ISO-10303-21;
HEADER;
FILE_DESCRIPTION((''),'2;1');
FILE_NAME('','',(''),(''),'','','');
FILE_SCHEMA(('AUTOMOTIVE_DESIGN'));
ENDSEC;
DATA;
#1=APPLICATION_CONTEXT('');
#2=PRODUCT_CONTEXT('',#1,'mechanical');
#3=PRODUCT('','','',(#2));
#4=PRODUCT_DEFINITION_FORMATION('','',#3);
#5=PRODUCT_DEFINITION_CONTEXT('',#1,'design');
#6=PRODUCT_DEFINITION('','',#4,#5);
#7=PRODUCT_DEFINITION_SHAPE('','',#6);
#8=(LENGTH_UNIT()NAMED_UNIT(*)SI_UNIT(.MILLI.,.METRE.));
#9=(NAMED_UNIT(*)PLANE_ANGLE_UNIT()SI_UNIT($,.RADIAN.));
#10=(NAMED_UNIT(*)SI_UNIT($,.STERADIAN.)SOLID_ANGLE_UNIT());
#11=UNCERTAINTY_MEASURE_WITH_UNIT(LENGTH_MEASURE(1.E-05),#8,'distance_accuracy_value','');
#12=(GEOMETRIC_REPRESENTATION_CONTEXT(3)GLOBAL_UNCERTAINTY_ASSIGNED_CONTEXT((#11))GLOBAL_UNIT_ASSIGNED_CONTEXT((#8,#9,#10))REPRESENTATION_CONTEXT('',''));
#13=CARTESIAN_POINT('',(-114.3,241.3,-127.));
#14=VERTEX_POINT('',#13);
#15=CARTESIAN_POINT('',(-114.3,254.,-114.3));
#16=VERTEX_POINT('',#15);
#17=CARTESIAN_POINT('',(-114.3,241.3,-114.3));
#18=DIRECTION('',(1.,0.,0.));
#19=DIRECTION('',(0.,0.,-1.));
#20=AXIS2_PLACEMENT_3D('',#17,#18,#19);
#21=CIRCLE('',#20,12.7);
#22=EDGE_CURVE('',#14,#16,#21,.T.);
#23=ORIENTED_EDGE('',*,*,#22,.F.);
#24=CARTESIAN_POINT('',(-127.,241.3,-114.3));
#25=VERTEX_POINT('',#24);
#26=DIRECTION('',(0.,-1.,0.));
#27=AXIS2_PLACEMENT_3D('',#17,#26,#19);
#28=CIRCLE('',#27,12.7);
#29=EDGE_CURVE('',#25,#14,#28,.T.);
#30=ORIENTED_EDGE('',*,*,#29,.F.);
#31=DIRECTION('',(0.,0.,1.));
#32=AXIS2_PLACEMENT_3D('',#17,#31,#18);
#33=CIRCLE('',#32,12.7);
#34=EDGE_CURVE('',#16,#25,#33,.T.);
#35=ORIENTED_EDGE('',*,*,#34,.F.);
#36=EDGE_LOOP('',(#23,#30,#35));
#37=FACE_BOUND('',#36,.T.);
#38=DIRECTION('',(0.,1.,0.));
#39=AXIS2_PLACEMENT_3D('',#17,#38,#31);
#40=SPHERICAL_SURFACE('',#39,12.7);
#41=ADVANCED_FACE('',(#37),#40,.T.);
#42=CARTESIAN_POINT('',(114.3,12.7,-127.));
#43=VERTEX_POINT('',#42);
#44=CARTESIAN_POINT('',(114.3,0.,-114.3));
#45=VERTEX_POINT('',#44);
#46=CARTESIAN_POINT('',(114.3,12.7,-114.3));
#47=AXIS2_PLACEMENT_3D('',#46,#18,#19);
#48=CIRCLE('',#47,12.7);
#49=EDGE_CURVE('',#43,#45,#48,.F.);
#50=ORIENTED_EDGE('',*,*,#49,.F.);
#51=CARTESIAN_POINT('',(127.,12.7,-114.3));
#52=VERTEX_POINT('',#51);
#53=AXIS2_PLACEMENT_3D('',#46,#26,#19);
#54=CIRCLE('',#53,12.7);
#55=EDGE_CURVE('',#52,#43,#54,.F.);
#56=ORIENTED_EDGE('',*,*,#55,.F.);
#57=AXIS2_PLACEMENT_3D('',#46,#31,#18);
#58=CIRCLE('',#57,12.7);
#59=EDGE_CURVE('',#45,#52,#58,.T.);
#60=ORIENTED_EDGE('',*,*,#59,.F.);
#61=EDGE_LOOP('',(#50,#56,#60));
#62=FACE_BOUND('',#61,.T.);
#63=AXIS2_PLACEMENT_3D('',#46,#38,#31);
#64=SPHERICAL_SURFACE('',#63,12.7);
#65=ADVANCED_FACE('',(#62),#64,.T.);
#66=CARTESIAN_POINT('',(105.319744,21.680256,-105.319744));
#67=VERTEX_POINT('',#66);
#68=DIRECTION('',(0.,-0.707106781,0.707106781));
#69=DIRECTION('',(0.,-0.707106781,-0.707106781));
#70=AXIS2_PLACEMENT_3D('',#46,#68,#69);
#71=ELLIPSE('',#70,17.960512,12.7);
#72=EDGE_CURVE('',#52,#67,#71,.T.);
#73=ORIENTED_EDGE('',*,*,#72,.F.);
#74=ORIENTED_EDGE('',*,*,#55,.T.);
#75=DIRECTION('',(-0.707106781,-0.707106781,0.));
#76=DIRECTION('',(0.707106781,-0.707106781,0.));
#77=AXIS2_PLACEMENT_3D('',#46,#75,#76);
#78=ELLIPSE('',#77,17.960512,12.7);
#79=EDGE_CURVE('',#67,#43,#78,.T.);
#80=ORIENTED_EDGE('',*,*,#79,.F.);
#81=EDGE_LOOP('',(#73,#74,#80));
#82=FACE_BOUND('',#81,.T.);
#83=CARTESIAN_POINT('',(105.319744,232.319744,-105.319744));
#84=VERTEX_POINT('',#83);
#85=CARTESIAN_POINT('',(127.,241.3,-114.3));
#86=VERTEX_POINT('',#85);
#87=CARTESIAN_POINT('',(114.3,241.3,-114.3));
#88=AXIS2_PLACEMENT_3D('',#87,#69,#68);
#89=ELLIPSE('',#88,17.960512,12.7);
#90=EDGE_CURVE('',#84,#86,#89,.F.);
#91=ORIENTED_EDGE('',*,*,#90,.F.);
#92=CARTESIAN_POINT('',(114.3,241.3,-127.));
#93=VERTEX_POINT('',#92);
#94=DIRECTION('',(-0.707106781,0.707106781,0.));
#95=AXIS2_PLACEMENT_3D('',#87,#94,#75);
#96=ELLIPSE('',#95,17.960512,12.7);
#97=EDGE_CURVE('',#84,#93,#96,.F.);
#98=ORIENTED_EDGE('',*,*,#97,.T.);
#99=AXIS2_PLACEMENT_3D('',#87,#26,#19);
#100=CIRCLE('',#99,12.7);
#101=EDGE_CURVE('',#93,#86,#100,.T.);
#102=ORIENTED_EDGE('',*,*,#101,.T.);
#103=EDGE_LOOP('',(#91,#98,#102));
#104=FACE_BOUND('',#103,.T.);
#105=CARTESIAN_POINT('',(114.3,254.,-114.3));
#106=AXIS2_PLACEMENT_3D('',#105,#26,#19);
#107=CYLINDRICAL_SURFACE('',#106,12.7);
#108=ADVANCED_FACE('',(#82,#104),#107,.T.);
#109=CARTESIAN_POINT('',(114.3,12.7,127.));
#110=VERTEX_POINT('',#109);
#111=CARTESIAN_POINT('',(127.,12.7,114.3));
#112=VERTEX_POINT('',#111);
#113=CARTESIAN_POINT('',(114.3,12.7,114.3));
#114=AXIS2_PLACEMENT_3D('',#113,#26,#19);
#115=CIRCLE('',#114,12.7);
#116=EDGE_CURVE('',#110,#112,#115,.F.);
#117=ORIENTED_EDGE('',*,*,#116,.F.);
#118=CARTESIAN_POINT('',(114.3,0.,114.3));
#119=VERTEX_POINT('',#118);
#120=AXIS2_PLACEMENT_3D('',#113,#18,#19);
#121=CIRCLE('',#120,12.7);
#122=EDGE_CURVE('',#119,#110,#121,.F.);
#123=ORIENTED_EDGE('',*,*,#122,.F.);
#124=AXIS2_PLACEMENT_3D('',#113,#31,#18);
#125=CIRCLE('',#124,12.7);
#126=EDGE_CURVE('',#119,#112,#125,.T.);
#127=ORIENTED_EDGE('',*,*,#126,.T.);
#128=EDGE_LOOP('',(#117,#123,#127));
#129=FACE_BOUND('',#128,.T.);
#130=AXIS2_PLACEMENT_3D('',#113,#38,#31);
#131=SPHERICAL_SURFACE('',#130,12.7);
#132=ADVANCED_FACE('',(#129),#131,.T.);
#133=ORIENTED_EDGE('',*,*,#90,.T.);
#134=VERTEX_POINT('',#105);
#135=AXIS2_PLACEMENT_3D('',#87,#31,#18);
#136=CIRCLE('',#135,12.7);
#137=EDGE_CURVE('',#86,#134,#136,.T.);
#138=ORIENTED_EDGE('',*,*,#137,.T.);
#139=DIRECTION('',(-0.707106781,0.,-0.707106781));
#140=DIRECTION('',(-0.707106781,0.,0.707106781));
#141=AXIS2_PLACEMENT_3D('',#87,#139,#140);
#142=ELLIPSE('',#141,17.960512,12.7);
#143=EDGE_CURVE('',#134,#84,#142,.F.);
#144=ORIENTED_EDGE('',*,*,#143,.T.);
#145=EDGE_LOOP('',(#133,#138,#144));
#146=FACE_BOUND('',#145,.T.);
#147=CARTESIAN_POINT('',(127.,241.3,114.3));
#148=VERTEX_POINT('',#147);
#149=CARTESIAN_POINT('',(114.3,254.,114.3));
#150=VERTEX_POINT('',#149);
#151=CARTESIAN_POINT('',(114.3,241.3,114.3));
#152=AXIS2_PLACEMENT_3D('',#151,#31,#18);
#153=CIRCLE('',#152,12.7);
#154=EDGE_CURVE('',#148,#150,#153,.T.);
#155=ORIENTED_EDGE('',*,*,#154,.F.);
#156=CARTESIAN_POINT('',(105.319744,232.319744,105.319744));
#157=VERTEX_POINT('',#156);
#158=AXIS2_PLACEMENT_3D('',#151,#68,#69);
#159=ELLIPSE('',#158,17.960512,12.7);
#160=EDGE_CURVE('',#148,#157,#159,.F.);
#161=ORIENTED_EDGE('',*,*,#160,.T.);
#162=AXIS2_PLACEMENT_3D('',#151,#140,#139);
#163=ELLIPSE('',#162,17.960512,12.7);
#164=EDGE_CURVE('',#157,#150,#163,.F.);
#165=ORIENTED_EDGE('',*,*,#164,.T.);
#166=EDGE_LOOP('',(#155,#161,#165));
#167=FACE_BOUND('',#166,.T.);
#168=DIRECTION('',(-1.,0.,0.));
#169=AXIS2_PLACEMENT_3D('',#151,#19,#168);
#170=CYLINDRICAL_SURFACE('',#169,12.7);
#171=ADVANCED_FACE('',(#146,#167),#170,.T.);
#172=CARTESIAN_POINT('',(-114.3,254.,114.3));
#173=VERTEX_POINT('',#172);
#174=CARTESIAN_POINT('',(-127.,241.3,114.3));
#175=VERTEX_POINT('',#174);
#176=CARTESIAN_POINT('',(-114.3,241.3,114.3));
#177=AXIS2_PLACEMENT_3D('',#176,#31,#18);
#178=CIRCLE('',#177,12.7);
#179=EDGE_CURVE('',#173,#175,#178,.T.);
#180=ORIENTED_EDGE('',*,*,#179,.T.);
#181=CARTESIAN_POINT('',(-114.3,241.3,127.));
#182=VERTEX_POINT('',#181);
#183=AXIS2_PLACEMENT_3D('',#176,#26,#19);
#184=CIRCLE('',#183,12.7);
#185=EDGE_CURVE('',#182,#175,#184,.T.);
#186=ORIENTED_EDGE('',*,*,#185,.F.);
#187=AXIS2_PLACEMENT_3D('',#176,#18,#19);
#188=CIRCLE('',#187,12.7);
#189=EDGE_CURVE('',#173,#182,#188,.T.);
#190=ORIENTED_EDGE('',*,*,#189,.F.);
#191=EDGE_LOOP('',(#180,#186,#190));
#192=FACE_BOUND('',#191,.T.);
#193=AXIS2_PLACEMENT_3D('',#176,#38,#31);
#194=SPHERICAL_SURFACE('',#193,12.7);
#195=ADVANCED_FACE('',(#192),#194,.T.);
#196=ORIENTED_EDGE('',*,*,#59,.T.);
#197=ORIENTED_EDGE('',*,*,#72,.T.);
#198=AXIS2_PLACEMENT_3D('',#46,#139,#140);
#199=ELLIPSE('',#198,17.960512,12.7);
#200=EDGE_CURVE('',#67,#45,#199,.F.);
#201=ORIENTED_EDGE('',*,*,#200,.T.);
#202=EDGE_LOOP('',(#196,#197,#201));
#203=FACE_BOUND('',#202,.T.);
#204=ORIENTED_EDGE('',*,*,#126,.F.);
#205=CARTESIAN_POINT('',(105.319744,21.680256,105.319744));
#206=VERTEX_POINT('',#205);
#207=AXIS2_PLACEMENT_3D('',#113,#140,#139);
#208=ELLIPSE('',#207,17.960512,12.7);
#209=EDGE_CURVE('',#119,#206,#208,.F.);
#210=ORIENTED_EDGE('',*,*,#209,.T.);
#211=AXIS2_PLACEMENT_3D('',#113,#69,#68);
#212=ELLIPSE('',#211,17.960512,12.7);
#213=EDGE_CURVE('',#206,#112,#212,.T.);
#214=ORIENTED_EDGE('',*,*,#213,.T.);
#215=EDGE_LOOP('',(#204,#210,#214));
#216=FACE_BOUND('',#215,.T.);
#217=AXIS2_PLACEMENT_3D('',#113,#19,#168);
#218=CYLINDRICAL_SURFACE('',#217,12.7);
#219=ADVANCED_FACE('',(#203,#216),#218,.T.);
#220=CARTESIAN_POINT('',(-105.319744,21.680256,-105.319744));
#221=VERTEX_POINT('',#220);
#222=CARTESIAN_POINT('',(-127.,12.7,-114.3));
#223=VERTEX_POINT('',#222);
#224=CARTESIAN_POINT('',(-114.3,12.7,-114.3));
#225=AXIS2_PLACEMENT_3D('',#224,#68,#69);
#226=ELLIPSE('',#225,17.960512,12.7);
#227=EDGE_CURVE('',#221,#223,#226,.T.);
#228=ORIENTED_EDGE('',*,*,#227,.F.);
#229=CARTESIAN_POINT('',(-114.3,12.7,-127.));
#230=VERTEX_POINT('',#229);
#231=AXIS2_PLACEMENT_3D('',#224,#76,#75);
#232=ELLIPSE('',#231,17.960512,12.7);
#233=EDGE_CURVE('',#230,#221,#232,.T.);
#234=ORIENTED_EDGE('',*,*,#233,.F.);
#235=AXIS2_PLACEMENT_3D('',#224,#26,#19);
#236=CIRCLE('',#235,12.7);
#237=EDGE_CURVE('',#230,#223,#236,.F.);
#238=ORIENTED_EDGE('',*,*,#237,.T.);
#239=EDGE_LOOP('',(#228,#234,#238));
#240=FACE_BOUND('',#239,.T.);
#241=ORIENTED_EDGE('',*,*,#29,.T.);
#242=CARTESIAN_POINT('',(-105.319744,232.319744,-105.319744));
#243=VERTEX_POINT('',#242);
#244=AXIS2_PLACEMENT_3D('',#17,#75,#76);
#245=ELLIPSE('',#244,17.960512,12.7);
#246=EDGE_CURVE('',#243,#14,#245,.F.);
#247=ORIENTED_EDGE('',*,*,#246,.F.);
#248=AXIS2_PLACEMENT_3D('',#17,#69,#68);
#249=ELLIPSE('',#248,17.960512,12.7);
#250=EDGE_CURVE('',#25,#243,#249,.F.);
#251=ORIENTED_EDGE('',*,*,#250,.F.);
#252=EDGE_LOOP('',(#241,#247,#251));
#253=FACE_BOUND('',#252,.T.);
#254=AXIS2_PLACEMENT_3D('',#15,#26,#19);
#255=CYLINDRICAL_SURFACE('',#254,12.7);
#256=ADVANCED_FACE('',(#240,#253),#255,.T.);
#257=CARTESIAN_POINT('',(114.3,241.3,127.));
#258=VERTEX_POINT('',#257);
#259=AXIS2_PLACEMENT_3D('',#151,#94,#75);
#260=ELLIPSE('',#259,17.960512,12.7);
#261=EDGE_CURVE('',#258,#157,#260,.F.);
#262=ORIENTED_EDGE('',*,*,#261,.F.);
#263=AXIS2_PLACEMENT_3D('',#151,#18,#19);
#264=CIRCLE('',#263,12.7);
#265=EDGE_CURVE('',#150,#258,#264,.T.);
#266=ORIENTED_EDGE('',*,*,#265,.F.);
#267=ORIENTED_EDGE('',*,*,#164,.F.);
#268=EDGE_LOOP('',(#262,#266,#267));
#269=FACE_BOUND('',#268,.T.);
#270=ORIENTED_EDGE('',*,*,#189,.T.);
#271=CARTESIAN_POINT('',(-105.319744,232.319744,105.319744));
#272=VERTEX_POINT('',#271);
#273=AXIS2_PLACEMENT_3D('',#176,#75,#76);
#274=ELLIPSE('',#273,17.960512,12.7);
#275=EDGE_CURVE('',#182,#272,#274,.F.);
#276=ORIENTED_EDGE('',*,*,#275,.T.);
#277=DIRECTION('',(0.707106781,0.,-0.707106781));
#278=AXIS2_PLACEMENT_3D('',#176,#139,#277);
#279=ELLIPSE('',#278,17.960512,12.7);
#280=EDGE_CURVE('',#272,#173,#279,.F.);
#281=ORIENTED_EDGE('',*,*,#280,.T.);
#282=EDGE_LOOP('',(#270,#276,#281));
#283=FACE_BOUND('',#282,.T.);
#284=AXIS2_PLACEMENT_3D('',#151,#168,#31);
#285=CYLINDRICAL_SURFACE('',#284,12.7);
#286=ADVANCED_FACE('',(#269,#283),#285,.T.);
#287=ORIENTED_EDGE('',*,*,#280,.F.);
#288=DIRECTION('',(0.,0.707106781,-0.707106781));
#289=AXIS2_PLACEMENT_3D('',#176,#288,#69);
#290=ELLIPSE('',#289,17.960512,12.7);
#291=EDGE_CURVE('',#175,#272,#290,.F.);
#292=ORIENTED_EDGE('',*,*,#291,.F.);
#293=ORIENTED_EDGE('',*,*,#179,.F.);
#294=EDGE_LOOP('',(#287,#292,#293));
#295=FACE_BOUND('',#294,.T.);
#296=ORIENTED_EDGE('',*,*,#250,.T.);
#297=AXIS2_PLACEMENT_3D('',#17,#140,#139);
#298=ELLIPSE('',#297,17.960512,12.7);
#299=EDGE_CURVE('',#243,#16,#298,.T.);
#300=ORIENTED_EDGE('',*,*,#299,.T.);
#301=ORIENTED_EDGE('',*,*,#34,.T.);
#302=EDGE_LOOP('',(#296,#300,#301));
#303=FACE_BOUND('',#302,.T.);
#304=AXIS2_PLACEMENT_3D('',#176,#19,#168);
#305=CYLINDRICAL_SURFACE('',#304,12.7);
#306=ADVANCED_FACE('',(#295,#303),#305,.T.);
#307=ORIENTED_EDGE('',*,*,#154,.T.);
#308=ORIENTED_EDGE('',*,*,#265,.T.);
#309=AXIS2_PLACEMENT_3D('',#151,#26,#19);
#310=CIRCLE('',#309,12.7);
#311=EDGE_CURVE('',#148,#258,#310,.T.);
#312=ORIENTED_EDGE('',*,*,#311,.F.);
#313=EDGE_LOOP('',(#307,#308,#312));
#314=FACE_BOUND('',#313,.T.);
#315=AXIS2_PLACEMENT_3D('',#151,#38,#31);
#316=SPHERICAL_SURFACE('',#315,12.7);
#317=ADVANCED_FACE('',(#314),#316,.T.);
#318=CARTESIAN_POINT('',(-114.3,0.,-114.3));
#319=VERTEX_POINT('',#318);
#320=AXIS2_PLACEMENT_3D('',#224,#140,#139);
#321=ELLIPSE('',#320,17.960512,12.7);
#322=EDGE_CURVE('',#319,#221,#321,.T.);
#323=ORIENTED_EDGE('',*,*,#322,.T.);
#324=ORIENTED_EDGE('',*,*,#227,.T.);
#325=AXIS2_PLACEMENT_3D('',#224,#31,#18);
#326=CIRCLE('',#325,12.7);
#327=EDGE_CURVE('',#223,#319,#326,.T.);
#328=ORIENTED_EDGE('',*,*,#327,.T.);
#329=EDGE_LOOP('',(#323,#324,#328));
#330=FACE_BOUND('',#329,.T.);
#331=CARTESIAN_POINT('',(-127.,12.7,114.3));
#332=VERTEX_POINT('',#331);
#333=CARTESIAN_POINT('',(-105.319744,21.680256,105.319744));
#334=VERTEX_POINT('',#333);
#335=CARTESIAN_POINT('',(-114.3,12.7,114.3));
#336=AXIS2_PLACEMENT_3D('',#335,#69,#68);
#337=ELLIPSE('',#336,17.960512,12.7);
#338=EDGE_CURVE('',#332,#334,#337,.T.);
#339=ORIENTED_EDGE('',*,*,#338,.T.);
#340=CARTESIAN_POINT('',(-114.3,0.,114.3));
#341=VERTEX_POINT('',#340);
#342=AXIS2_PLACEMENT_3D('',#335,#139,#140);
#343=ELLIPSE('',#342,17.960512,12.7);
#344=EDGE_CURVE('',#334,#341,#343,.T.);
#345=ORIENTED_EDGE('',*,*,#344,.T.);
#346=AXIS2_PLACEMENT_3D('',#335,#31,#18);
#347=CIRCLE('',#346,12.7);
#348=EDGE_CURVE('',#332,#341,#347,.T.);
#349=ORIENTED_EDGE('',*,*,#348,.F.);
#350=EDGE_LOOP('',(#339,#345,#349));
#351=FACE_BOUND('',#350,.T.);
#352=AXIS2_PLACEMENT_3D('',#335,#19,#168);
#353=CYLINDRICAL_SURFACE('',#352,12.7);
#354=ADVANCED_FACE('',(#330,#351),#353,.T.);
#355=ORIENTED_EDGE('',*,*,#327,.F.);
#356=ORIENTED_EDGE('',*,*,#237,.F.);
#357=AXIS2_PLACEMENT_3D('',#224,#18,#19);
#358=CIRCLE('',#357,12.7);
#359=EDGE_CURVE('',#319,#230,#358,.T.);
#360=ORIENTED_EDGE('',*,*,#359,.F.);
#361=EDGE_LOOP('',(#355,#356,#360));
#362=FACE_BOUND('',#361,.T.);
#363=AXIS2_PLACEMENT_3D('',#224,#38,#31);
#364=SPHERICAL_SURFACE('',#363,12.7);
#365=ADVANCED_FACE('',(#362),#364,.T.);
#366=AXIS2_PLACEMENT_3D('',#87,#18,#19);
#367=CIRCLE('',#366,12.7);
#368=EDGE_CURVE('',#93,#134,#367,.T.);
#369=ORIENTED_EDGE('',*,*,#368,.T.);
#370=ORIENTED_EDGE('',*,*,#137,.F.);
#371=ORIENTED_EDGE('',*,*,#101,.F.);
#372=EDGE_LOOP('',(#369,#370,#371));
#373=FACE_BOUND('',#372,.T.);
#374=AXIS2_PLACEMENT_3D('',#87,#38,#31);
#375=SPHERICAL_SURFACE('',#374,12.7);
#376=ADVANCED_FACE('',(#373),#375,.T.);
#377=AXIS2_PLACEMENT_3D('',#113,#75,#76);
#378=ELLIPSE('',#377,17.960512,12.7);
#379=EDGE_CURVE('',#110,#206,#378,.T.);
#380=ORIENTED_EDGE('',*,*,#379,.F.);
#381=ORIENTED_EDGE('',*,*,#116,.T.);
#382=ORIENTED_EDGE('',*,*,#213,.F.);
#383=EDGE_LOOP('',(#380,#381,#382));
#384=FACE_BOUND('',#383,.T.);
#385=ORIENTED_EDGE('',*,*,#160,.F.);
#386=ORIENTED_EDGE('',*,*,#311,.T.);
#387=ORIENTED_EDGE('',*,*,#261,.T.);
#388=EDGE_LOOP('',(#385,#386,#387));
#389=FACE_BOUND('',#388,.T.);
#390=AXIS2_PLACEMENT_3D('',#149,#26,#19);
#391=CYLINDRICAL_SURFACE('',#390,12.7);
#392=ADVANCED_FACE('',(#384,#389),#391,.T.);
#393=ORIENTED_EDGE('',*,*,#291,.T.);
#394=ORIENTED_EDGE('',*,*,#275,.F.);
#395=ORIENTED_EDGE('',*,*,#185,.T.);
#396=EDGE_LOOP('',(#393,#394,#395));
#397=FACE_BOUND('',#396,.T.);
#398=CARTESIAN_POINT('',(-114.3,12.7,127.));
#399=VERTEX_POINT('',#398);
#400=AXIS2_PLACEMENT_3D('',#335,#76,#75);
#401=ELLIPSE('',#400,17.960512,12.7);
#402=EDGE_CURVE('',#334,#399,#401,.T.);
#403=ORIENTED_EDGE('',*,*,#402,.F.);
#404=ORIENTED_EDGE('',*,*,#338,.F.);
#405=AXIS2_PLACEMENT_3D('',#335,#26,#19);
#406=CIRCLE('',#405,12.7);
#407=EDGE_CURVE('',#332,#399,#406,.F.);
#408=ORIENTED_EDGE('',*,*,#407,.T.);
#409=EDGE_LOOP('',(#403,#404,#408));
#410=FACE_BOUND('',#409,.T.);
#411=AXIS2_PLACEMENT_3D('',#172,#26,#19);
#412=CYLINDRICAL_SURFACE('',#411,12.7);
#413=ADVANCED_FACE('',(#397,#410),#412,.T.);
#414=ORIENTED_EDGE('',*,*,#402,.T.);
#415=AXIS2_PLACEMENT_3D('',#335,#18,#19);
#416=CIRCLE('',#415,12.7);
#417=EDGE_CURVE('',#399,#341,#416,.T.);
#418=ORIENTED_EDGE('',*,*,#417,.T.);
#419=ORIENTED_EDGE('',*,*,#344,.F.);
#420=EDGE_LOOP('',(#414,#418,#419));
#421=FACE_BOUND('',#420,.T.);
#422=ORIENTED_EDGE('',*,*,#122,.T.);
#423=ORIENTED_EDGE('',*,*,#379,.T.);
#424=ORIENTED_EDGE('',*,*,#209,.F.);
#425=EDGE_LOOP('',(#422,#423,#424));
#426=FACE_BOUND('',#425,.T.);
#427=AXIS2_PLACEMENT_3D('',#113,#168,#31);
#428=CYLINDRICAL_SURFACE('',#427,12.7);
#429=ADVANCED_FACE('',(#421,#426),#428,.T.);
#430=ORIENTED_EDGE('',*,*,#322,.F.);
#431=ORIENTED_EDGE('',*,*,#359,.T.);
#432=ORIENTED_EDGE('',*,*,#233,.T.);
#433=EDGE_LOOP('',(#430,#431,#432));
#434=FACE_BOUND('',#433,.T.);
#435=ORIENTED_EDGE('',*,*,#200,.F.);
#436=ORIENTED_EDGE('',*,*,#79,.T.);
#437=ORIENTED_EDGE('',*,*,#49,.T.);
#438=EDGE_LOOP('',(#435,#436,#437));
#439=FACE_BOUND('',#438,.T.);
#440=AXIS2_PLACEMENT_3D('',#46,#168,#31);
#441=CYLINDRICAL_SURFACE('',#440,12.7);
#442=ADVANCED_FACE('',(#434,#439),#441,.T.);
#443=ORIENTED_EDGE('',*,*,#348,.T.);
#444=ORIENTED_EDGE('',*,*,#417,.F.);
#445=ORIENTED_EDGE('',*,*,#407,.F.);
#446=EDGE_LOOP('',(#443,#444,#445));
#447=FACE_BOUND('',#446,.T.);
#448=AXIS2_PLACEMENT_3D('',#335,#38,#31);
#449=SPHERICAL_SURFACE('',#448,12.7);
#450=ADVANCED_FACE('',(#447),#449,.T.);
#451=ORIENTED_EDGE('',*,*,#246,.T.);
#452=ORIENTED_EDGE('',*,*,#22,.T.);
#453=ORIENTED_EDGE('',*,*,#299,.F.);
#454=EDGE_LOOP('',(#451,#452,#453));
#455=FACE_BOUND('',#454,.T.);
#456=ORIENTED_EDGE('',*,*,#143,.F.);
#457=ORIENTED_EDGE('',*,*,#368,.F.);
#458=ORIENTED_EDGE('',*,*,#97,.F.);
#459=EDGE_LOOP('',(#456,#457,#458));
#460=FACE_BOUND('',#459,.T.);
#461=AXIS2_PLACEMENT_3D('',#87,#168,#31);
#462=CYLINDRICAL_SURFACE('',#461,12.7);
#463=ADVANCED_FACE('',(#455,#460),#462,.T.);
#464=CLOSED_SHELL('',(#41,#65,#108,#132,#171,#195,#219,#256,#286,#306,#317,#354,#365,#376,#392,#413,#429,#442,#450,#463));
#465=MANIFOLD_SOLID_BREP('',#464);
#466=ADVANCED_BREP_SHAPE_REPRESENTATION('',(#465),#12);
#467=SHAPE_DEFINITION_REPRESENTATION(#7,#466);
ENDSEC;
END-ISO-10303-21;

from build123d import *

# Parameters (mm, degrees)
SKETCH5_R            = 12.7
BOSS_EXTRUDE2_DEPTH  = 254
FILLET2_R            = 12.7
LPATTERN1_COUNT      = 2
LPATTERN1_PITCH      = 228.6
LPATTERN1_2_COUNT    = 2
LPATTERN1_2_PITCH    = 228.6
SKETCH6_R            = 12.7
BOSS_EXTRUDE3_DEPTH  = 114.3
LPATTERN2_COUNT      = 2
LPATTERN2_PITCH      = 228.6
LPATTERN2_COUNT_DIR2 = 2
LPATTERN2_PITCH_DIR2 = 228.6
SKETCH8_R            = 12.7
BOSS_EXTRUDE4_DEPTH  = 114.3
LPATTERN3_COUNT      = 2
LPATTERN3_PITCH      = 228.6
LPATTERN3_COUNT_DIR2 = 2
LPATTERN3_PITCH_DIR2 = 228.6


with BuildPart() as part:
    # Sketch5 → Boss-Extrude2 (new body)
    with BuildSketch(Plane(origin=(0, 0, 0), x_dir=(1, 0, 0), z_dir=(0, 1, 0))):
        with Locations(Location((-114.3, 114.3, 0), (0, 0, 270))):
            Circle(SKETCH5_R)
    extrude(amount=BOSS_EXTRUDE2_DEPTH)

    # Fillet2
    fillet2_edges = [part.edges().sort_by_distance(p)[0] for p in [
        (-114.3, 0, -127),
        (-114.3, 254, -127),
    ]]
    fillet(fillet2_edges, radius=FILLET2_R)


with BuildPart() as lpattern1_1:
    # LPattern1: pattern copy
    add(part.part.moved(Location(Vector(1, 0, 0) * (1 * LPATTERN1_PITCH))))


with BuildPart() as lpattern1_2_1:
    # LPattern1 2: pattern copy
    add(part.part.moved(Location(Vector(0, 0, 1) * (1 * LPATTERN1_2_PITCH))))



with BuildPart() as lpattern1_2_2:
    # LPattern1 2: pattern copy
    add(lpattern1_1.part.moved(Location(Vector(0, 0, 1) * (1 * LPATTERN1_2_PITCH))))


with BuildPart() as lpattern1_2_1_1:
    add(lpattern1_2_1.part)

    add(lpattern1_2_2.part)  # Boss-Extrude3 merges LPattern1 2_2
    # Sketch6 → Boss-Extrude3 (add, symmetric)
    with BuildSketch(Plane(origin=(0, 0, 0), x_dir=(0, 0, -1), z_dir=(1, 0, 0))):
        with Locations(Location((-114.3, 241.3, 0), (0, 0, 180))):
            Circle(SKETCH6_R)
    boss_extrude3 = extrude(amount=BOSS_EXTRUDE3_DEPTH, both=True)


with BuildPart() as part_1:
    add(part.part)

    add(lpattern1_1.part)  # LPattern2 merges LPattern1_1

    add(lpattern1_2_1_1.part)  # LPattern2 merges LPattern1 2_1
    # LPattern2: Boss-Extrude3 2 × 2
    with Locations(*[(0, -j * LPATTERN2_PITCH_DIR2, -i * LPATTERN2_PITCH) for i in range(LPATTERN2_COUNT) for j in range(LPATTERN2_COUNT_DIR2) if (i, j) != (0, 0)]):
        add(boss_extrude3)

    # Sketch8 → Boss-Extrude4 (add, symmetric)
    with BuildSketch(Plane.XY):
        with Locations(Location((-114.3, 241.3, 0), (0, 0, 180))):
            Circle(SKETCH8_R)
    boss_extrude4 = extrude(amount=BOSS_EXTRUDE4_DEPTH, both=True)

    # LPattern3: Boss-Extrude4 2 × 2
    with Locations(*[(i * LPATTERN3_PITCH, -j * LPATTERN3_PITCH_DIR2, 0) for i in range(LPATTERN3_COUNT) for j in range(LPATTERN3_COUNT_DIR2) if (i, j) != (0, 0)]):
        add(boss_extrude4)


solid = part_1.part
